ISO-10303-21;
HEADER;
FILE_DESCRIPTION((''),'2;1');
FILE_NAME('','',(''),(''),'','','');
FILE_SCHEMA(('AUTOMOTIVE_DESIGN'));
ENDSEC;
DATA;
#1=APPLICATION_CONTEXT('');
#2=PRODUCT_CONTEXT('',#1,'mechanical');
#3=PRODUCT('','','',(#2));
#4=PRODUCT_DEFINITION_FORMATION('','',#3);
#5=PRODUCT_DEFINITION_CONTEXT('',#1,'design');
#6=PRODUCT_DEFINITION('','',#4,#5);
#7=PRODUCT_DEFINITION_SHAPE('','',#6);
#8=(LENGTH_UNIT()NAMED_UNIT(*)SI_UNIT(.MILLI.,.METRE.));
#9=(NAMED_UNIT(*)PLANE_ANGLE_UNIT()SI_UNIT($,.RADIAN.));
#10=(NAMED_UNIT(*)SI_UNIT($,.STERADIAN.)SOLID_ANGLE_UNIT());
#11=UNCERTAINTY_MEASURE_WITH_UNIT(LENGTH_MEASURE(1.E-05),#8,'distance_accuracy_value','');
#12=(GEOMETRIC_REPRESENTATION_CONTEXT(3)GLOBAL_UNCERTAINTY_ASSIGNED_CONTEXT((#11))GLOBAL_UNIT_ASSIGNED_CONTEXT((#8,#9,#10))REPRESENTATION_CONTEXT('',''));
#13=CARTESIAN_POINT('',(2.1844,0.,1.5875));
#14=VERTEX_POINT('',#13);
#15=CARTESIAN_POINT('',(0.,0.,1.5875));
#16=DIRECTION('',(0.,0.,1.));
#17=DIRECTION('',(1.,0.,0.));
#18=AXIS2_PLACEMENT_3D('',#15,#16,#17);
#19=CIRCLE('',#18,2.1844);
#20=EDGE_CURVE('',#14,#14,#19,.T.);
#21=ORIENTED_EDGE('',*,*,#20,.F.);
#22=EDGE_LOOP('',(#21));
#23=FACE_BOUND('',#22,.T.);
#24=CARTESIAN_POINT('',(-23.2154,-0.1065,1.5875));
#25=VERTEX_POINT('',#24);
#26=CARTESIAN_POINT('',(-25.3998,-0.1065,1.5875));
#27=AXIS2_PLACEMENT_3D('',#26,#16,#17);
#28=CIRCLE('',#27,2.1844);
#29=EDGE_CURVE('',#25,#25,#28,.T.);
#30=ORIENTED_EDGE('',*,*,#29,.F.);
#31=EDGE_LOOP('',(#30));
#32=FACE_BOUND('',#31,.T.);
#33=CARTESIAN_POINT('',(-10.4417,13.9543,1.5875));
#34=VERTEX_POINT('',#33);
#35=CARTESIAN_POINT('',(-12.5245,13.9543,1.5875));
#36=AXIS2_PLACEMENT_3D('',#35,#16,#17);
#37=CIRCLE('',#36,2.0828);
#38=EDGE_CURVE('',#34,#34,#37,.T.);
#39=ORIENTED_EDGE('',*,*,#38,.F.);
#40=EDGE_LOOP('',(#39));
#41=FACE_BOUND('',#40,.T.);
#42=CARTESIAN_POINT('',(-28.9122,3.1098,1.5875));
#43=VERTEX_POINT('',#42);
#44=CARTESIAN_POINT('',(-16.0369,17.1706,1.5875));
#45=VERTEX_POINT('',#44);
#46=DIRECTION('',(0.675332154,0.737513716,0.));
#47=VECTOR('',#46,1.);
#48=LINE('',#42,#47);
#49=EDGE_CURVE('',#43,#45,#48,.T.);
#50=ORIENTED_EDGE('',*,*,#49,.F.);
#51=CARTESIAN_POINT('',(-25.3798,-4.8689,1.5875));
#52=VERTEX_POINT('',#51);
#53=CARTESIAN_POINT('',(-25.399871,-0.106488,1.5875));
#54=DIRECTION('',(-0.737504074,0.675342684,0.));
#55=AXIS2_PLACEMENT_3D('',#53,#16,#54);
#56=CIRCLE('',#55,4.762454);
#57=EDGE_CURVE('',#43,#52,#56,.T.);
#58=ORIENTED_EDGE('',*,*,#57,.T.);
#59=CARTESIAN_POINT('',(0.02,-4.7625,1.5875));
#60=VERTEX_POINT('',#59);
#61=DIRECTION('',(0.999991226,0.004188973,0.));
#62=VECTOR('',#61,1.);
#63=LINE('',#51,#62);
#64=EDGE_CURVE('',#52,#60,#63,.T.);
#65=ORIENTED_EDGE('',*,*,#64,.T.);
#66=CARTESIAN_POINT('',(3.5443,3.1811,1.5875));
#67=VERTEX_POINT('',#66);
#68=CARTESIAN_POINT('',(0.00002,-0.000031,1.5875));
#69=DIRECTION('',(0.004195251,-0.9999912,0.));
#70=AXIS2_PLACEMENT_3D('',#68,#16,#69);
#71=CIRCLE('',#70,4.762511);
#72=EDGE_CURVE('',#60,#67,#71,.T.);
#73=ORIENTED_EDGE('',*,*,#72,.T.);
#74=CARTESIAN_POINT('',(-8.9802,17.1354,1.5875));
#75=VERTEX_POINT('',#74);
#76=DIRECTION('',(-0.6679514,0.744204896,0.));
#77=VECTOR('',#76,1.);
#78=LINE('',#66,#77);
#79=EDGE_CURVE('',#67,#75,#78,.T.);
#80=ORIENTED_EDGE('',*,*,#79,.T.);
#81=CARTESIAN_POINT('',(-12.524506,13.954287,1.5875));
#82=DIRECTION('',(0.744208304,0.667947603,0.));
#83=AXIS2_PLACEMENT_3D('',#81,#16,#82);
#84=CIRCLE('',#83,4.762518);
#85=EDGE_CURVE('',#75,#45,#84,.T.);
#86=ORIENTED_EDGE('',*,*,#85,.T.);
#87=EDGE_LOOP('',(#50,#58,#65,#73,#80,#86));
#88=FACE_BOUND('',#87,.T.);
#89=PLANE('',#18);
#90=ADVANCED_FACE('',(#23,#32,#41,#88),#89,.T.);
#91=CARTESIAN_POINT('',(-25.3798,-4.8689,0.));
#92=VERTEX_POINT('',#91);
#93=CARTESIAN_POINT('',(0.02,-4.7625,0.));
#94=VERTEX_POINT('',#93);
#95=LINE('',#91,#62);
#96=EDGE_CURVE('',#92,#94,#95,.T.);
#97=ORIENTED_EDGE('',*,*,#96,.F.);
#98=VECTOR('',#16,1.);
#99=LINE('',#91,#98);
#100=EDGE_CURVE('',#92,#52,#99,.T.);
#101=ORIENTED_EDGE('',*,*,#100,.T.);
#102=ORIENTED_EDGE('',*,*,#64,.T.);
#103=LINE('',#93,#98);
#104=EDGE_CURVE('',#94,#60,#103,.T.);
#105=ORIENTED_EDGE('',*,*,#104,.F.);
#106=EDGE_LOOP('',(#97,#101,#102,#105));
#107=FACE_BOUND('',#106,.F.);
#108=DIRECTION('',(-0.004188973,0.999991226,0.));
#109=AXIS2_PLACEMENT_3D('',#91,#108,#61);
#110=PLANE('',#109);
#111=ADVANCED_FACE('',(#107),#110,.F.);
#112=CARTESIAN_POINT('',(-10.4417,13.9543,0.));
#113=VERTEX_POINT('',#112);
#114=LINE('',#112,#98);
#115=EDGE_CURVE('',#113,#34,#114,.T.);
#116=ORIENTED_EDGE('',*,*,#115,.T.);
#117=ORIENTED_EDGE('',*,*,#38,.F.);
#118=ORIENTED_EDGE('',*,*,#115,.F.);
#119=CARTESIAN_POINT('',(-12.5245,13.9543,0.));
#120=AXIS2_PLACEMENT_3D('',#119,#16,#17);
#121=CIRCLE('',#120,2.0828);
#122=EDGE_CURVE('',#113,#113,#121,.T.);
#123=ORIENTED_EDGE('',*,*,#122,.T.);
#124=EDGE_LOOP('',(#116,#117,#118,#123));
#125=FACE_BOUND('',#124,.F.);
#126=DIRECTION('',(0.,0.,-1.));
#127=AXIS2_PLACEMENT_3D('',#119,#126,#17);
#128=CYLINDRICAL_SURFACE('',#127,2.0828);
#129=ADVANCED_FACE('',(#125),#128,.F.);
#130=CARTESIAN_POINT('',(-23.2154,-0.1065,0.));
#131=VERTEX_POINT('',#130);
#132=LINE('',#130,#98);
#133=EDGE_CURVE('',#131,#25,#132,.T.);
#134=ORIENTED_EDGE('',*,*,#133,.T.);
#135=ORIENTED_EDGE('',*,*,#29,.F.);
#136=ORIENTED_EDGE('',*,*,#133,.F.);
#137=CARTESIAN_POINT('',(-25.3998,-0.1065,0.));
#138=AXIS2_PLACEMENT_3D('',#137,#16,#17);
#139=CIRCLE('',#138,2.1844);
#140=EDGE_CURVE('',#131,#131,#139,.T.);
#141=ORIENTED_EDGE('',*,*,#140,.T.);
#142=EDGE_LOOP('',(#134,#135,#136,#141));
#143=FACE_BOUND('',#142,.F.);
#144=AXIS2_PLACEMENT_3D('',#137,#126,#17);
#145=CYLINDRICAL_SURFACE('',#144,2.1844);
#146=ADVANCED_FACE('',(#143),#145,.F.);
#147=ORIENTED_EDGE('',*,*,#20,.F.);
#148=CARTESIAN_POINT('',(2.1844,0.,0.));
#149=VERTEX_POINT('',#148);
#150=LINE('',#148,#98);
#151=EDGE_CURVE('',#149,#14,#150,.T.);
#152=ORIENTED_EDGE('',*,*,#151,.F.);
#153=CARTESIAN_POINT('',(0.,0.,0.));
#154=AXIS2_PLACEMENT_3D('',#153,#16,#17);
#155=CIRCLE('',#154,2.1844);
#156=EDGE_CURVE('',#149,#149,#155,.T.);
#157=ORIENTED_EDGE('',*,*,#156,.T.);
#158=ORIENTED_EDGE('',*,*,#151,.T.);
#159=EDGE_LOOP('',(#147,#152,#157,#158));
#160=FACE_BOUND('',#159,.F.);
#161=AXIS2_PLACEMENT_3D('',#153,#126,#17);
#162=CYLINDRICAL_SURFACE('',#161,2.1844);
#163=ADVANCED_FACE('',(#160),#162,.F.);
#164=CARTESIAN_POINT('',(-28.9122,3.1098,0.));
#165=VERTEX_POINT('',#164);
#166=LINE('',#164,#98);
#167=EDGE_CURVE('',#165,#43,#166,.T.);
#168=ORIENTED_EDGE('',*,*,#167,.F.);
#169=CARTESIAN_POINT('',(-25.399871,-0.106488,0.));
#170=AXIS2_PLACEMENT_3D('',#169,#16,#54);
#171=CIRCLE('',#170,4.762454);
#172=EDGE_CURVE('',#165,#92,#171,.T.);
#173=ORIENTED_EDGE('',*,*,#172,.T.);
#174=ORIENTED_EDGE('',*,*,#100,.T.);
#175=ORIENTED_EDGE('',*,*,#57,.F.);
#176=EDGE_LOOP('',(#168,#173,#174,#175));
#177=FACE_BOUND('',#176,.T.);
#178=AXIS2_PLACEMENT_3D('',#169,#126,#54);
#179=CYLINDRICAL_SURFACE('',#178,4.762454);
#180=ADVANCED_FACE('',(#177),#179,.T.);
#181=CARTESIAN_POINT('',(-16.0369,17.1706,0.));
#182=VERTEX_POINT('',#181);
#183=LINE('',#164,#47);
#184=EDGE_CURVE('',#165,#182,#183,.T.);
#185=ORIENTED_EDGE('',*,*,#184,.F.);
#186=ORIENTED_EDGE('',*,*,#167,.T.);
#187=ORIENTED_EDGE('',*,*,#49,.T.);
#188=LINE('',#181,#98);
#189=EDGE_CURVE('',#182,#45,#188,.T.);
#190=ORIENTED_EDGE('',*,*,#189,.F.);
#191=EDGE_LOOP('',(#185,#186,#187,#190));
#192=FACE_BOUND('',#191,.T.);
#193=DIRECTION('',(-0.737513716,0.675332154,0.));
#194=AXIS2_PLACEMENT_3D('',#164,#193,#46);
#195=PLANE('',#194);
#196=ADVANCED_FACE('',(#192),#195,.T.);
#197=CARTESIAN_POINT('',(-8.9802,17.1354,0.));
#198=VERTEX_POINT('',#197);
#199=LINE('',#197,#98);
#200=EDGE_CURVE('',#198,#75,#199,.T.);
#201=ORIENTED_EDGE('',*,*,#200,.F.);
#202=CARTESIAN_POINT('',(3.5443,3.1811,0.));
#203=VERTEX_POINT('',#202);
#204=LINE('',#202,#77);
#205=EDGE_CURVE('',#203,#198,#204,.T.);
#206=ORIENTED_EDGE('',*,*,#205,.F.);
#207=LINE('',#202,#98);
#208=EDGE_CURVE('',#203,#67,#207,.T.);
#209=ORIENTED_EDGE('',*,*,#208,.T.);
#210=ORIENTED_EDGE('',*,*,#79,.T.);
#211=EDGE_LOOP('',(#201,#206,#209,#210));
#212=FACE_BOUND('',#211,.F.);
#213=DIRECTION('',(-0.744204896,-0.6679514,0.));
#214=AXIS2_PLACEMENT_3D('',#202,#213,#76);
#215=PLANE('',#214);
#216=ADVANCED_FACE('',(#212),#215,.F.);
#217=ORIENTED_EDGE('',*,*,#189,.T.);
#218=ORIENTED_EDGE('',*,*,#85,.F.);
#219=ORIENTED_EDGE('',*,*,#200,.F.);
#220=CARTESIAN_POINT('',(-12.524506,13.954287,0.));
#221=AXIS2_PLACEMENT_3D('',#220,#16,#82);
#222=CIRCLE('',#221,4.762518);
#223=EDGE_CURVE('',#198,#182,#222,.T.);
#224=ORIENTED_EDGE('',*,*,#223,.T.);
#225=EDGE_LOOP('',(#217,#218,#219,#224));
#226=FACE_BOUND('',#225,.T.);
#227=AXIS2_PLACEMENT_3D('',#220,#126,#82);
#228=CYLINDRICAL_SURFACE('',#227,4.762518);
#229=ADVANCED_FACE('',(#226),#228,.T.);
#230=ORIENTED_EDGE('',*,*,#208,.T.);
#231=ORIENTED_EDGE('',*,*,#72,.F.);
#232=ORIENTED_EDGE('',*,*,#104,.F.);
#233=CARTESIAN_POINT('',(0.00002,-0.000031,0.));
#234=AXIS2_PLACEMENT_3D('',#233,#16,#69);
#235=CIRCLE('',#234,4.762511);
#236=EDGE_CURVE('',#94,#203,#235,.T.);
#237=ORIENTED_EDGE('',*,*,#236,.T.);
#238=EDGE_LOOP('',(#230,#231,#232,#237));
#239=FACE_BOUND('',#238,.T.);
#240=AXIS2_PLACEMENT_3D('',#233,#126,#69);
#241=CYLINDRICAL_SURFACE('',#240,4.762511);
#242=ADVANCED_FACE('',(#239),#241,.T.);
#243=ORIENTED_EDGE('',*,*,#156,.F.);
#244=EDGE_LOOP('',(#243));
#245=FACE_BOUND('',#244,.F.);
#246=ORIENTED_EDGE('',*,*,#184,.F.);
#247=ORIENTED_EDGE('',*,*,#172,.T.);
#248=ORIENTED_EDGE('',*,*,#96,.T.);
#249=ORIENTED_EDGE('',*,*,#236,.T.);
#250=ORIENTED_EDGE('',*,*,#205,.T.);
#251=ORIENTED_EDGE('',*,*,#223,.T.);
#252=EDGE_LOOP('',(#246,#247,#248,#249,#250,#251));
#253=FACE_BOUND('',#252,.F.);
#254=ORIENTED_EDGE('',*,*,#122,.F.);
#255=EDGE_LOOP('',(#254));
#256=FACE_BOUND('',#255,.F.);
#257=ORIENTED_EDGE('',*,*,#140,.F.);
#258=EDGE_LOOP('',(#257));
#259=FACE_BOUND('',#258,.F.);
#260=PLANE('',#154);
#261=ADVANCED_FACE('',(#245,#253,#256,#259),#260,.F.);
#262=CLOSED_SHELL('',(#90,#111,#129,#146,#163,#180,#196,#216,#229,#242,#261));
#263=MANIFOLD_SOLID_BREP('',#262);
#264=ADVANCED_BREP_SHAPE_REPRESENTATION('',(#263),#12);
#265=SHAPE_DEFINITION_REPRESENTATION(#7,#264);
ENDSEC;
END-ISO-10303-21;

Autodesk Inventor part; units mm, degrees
ref_plane "YZ Plane" through (0, 0, 0) normal (1, 0, 0) x (0, 1, 0)
ref_plane "XZ Plane" through (0, 0, 0) normal (0, 1, 0) x (-1, 0, 0)
ref_plane "XY Plane" through (0, 0, 0) normal (0, 0, 1) x (1, 0, 0)
sketch "main" plane through (0, 0, 0) normal (0, 0, 1) x (1, 0, 0)
  circle A0 centre (4.313, -2.5933) radius 2.0828
  circle A1 centre (17.2471, 11.4133) radius 2.1844
  circle A2 centre (-8.1529, 11.4133) radius 2.1844
  arc A3 (-8.1529, 16.1758) -> (-11.7104, 8.2471) centre (-8.1529, 11.4133) ccw
  arc A4 (20.746, 8.1824) -> (17.2471, 16.1758) centre (17.2471, 11.4133) ccw
  arc A5 (0.7554, -5.7596) -> (7.8119, -5.8243) centre (4.313, -2.5933) ccw
  line L0 (20.746, 8.1824) -> (7.8119, -5.8243)
  line L1 (17.2471, 16.1758) -> (-8.1529, 16.1758)
  line L2 (-11.7104, 8.2471) -> (0.7554, -5.7596)
  point P0 (4.4691, 6.7444)
  dimension "d0" = 4.1656
  dimension "d1" = 9.525
  dimension "d2" = 9.525
  dimension "d3" = 9.525
sketch "Sketch1" plane through (0, 0, 0) normal (0, 0, 1) x (1, 0, 0)
  circle A0 centre (-12.5245, 13.9543) radius 2.0828
  circle A1 centre (-25.3998, -0.1065) radius 2.1844
  circle A2 centre (0, 0) radius 2.1844
  arc A3 (0.02, -4.7625) -> (3.5443, 3.1811) centre (0, 0) ccw
  arc A4 (-28.9122, 3.1098) -> (-25.3798, -4.8689) centre (-25.3998, -0.1065) ccw
  arc A5 (-8.9802, 17.1354) -> (-16.0369, 17.1706) centre (-12.5245, 13.9543) ccw
  line L0 (-28.9122, 3.1098) -> (-16.0369, 17.1706)
  line L1 (-25.3798, -4.8689) -> (0.02, -4.7625)
  line L2 (3.5443, 3.1811) -> (-8.9802, 17.1354)
  point P0 (0, 0)
extrude "Extrusion1" add sketch "Sketch1" along normal blind 1.5875
properties part number "brace_gusset" material "Acetal Resin, White"
